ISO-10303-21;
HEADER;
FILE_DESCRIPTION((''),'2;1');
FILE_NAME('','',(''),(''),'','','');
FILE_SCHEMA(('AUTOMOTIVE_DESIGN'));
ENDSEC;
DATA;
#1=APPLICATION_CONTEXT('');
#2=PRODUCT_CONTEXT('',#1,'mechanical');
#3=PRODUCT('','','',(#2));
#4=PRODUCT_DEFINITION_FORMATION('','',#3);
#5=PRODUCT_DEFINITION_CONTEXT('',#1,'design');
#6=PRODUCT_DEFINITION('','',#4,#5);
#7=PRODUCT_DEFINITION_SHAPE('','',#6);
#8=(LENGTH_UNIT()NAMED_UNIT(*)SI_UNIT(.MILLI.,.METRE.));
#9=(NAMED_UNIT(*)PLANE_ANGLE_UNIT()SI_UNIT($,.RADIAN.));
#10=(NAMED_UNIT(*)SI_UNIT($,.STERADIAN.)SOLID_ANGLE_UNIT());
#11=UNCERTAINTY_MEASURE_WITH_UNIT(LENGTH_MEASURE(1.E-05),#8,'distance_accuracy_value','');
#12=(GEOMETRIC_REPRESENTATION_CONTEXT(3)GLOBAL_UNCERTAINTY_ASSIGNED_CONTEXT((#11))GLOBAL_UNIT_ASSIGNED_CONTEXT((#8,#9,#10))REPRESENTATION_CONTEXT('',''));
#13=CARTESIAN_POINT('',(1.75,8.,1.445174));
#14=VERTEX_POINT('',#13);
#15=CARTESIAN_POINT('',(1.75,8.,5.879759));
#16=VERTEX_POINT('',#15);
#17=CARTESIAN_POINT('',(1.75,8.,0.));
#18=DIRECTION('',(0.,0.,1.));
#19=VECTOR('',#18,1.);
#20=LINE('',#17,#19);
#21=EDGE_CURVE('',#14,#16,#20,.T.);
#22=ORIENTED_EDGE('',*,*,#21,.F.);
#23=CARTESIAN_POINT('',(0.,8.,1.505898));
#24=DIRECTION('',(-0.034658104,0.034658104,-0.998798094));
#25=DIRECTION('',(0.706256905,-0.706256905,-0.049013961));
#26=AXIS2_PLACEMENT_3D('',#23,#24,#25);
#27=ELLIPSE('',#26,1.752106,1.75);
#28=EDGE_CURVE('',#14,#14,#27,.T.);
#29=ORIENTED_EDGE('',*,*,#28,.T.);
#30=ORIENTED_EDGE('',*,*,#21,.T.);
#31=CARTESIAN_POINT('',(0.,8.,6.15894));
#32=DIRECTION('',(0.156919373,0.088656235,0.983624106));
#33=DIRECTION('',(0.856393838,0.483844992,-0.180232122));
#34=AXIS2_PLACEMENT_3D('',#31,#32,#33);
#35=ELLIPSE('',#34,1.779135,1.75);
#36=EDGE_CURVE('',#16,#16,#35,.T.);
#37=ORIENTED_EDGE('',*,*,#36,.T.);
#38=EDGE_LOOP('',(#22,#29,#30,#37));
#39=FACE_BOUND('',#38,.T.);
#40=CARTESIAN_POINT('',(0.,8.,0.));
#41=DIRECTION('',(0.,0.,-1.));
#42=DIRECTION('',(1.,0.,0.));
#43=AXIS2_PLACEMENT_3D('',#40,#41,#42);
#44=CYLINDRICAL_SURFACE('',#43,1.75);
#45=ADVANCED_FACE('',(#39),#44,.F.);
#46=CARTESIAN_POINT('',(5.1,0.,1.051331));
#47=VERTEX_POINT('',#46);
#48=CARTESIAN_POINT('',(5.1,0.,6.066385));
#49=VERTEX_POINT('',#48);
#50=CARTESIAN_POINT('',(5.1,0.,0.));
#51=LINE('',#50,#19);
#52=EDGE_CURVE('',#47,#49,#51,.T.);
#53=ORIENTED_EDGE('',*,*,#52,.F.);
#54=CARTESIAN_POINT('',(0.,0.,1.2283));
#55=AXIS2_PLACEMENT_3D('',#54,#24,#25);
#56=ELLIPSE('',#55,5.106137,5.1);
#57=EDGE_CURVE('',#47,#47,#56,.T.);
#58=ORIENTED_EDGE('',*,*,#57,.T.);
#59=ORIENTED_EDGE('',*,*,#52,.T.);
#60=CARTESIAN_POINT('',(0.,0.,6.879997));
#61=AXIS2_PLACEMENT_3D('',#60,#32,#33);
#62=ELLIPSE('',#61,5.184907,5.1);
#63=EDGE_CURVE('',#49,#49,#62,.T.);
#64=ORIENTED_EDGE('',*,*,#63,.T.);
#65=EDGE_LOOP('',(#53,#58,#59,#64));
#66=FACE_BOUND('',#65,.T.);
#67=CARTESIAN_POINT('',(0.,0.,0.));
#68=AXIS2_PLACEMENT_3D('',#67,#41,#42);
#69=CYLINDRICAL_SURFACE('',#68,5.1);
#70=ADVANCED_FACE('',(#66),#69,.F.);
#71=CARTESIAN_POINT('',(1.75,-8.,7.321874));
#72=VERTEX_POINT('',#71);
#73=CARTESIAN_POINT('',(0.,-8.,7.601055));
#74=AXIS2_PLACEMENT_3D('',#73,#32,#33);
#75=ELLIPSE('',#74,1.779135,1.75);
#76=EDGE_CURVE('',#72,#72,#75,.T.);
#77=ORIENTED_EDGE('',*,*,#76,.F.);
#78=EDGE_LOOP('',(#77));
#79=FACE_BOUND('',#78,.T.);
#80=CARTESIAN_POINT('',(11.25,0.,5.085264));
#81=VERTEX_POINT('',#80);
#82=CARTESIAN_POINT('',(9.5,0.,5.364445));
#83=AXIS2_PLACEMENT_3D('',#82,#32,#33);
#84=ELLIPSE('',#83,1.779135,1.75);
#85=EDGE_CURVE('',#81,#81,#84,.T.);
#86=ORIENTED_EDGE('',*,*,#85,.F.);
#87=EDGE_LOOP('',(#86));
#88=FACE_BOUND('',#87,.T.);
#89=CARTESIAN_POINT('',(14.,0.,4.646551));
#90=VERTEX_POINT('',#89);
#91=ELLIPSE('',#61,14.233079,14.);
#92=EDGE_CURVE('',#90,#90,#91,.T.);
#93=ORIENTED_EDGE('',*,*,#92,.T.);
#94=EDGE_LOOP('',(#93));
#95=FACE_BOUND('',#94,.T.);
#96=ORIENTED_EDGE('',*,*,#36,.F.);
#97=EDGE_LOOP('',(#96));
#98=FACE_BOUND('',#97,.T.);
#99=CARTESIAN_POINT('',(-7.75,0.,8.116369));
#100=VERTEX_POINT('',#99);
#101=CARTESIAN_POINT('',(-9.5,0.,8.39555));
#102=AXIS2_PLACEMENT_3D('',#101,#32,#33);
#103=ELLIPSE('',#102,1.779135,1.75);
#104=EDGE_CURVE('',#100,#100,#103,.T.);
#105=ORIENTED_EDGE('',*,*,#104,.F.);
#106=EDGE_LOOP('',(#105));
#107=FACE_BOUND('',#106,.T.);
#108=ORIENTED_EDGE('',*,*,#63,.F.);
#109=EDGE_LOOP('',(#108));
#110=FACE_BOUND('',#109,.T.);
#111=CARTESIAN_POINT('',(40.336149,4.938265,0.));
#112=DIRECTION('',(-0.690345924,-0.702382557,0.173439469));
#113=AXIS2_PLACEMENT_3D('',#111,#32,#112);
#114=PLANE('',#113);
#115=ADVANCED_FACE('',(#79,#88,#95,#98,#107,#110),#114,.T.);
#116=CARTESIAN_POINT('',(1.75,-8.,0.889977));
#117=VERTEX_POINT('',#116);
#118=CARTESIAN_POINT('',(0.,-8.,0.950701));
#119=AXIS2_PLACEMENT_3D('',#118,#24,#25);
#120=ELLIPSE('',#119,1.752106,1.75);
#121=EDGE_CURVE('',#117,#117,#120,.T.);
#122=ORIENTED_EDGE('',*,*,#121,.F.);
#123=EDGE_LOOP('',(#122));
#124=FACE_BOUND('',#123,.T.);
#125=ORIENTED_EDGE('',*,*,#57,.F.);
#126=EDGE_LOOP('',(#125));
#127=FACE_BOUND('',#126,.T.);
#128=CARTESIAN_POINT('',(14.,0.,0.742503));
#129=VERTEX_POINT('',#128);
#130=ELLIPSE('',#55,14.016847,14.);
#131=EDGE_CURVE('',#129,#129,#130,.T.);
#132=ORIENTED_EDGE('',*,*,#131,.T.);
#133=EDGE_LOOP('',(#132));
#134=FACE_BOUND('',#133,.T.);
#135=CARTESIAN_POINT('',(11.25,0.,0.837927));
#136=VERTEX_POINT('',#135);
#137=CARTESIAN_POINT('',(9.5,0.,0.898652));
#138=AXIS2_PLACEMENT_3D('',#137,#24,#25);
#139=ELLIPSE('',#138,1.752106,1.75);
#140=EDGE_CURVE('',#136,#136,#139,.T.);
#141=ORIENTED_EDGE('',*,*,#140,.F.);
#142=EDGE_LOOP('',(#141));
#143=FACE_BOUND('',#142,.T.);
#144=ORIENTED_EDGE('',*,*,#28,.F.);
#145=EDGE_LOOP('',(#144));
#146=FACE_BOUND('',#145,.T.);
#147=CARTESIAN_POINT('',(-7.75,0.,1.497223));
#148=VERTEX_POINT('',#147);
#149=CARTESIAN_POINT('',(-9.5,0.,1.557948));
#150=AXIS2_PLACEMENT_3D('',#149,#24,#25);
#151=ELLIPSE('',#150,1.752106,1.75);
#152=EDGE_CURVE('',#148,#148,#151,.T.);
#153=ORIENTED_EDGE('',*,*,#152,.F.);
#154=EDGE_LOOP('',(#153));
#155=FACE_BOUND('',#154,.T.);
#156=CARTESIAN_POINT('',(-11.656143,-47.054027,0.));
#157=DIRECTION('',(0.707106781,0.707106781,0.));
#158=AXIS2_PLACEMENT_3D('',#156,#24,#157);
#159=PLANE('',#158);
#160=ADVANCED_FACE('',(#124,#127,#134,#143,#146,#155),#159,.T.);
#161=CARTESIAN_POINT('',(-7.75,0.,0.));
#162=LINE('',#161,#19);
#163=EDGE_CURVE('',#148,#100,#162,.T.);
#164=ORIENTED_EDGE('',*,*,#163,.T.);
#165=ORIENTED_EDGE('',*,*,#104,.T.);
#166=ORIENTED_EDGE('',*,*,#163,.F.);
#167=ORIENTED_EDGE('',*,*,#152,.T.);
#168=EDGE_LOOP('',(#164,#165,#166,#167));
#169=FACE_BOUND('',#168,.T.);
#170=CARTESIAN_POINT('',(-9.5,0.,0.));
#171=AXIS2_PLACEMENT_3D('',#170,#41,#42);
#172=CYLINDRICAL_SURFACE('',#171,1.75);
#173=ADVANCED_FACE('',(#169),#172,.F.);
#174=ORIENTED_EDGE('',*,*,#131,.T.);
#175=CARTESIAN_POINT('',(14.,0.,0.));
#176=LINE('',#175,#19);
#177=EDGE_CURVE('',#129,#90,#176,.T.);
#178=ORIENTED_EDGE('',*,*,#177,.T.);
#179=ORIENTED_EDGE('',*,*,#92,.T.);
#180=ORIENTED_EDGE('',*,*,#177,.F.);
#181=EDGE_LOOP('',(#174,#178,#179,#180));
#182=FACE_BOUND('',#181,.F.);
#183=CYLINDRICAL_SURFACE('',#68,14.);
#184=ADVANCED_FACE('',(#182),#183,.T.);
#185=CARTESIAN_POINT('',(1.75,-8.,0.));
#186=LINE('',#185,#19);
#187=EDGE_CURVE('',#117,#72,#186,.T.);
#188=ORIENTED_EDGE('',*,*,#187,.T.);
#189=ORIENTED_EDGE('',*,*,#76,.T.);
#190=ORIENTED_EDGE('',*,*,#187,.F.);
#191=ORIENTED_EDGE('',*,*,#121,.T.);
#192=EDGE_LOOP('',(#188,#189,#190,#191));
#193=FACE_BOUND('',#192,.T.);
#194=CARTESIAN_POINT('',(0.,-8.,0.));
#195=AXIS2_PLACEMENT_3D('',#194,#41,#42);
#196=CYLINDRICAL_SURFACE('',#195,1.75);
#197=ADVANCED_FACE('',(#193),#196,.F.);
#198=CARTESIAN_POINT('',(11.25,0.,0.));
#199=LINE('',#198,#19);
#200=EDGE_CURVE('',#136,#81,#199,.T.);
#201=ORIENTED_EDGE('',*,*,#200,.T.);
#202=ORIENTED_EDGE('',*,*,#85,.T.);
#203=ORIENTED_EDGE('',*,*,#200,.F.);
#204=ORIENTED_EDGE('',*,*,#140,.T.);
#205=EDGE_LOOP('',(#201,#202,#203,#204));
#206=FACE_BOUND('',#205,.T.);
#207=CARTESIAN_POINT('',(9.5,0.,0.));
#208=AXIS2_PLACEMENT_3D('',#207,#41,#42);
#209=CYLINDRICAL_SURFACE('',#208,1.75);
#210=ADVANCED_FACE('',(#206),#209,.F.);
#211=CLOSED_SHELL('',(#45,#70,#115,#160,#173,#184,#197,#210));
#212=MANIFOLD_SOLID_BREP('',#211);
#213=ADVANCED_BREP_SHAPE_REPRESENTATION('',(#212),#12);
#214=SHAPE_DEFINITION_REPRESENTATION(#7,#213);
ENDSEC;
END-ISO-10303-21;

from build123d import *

# Parameters (mm, degrees)
F0_R     = 14
F0_R_2   = 1.75
F0_R_3   = 5.1
F1_DEPTH = 10
F6_DEPTH = 40


with BuildPart() as f1:
    # F0 (on Top) → F1 (new body)
    with BuildSketch(Plane.XY):
        Circle(F0_R)
        with Locations((0, -8)):
            Circle(F0_R_2, mode=Mode.SUBTRACT)
        with Locations((-9.5, 0)):
            Circle(F0_R_2, mode=Mode.SUBTRACT)
        Circle(F0_R_3, mode=Mode.SUBTRACT)
        with Locations((9.5, 0)):
            Circle(F0_R_2, mode=Mode.SUBTRACT)
        with Locations((0, 8)):
            Circle(F0_R_2, mode=Mode.SUBTRACT)
    extrude(amount=F1_DEPTH)

    # F5 (on face) → F6 (intersect)
    with BuildSketch(Plane(origin=(17.6564226245, -17.6564226245, -1.2253490154), x_dir=(0.7045622489, 0.7079556371, -0.0488963521), z_dir=(0.706256905, -0.706256905, -0.0490139606))):
        Polygon((-42.1593469174, 12.1424701935), (-41.5246425416, -0.8069908946), (14.9219552549, 1.9596804268), (14.7750896798, 4.9560833541), align=None)
        Polygon((14.7750896798, 4.9560833541), (14.9219552549, 1.9596804268), (31.9154007009, 2.7925964926), align=None)
    extrude(amount=-F6_DEPTH, mode=Mode.INTERSECT)


solid = f1.part
